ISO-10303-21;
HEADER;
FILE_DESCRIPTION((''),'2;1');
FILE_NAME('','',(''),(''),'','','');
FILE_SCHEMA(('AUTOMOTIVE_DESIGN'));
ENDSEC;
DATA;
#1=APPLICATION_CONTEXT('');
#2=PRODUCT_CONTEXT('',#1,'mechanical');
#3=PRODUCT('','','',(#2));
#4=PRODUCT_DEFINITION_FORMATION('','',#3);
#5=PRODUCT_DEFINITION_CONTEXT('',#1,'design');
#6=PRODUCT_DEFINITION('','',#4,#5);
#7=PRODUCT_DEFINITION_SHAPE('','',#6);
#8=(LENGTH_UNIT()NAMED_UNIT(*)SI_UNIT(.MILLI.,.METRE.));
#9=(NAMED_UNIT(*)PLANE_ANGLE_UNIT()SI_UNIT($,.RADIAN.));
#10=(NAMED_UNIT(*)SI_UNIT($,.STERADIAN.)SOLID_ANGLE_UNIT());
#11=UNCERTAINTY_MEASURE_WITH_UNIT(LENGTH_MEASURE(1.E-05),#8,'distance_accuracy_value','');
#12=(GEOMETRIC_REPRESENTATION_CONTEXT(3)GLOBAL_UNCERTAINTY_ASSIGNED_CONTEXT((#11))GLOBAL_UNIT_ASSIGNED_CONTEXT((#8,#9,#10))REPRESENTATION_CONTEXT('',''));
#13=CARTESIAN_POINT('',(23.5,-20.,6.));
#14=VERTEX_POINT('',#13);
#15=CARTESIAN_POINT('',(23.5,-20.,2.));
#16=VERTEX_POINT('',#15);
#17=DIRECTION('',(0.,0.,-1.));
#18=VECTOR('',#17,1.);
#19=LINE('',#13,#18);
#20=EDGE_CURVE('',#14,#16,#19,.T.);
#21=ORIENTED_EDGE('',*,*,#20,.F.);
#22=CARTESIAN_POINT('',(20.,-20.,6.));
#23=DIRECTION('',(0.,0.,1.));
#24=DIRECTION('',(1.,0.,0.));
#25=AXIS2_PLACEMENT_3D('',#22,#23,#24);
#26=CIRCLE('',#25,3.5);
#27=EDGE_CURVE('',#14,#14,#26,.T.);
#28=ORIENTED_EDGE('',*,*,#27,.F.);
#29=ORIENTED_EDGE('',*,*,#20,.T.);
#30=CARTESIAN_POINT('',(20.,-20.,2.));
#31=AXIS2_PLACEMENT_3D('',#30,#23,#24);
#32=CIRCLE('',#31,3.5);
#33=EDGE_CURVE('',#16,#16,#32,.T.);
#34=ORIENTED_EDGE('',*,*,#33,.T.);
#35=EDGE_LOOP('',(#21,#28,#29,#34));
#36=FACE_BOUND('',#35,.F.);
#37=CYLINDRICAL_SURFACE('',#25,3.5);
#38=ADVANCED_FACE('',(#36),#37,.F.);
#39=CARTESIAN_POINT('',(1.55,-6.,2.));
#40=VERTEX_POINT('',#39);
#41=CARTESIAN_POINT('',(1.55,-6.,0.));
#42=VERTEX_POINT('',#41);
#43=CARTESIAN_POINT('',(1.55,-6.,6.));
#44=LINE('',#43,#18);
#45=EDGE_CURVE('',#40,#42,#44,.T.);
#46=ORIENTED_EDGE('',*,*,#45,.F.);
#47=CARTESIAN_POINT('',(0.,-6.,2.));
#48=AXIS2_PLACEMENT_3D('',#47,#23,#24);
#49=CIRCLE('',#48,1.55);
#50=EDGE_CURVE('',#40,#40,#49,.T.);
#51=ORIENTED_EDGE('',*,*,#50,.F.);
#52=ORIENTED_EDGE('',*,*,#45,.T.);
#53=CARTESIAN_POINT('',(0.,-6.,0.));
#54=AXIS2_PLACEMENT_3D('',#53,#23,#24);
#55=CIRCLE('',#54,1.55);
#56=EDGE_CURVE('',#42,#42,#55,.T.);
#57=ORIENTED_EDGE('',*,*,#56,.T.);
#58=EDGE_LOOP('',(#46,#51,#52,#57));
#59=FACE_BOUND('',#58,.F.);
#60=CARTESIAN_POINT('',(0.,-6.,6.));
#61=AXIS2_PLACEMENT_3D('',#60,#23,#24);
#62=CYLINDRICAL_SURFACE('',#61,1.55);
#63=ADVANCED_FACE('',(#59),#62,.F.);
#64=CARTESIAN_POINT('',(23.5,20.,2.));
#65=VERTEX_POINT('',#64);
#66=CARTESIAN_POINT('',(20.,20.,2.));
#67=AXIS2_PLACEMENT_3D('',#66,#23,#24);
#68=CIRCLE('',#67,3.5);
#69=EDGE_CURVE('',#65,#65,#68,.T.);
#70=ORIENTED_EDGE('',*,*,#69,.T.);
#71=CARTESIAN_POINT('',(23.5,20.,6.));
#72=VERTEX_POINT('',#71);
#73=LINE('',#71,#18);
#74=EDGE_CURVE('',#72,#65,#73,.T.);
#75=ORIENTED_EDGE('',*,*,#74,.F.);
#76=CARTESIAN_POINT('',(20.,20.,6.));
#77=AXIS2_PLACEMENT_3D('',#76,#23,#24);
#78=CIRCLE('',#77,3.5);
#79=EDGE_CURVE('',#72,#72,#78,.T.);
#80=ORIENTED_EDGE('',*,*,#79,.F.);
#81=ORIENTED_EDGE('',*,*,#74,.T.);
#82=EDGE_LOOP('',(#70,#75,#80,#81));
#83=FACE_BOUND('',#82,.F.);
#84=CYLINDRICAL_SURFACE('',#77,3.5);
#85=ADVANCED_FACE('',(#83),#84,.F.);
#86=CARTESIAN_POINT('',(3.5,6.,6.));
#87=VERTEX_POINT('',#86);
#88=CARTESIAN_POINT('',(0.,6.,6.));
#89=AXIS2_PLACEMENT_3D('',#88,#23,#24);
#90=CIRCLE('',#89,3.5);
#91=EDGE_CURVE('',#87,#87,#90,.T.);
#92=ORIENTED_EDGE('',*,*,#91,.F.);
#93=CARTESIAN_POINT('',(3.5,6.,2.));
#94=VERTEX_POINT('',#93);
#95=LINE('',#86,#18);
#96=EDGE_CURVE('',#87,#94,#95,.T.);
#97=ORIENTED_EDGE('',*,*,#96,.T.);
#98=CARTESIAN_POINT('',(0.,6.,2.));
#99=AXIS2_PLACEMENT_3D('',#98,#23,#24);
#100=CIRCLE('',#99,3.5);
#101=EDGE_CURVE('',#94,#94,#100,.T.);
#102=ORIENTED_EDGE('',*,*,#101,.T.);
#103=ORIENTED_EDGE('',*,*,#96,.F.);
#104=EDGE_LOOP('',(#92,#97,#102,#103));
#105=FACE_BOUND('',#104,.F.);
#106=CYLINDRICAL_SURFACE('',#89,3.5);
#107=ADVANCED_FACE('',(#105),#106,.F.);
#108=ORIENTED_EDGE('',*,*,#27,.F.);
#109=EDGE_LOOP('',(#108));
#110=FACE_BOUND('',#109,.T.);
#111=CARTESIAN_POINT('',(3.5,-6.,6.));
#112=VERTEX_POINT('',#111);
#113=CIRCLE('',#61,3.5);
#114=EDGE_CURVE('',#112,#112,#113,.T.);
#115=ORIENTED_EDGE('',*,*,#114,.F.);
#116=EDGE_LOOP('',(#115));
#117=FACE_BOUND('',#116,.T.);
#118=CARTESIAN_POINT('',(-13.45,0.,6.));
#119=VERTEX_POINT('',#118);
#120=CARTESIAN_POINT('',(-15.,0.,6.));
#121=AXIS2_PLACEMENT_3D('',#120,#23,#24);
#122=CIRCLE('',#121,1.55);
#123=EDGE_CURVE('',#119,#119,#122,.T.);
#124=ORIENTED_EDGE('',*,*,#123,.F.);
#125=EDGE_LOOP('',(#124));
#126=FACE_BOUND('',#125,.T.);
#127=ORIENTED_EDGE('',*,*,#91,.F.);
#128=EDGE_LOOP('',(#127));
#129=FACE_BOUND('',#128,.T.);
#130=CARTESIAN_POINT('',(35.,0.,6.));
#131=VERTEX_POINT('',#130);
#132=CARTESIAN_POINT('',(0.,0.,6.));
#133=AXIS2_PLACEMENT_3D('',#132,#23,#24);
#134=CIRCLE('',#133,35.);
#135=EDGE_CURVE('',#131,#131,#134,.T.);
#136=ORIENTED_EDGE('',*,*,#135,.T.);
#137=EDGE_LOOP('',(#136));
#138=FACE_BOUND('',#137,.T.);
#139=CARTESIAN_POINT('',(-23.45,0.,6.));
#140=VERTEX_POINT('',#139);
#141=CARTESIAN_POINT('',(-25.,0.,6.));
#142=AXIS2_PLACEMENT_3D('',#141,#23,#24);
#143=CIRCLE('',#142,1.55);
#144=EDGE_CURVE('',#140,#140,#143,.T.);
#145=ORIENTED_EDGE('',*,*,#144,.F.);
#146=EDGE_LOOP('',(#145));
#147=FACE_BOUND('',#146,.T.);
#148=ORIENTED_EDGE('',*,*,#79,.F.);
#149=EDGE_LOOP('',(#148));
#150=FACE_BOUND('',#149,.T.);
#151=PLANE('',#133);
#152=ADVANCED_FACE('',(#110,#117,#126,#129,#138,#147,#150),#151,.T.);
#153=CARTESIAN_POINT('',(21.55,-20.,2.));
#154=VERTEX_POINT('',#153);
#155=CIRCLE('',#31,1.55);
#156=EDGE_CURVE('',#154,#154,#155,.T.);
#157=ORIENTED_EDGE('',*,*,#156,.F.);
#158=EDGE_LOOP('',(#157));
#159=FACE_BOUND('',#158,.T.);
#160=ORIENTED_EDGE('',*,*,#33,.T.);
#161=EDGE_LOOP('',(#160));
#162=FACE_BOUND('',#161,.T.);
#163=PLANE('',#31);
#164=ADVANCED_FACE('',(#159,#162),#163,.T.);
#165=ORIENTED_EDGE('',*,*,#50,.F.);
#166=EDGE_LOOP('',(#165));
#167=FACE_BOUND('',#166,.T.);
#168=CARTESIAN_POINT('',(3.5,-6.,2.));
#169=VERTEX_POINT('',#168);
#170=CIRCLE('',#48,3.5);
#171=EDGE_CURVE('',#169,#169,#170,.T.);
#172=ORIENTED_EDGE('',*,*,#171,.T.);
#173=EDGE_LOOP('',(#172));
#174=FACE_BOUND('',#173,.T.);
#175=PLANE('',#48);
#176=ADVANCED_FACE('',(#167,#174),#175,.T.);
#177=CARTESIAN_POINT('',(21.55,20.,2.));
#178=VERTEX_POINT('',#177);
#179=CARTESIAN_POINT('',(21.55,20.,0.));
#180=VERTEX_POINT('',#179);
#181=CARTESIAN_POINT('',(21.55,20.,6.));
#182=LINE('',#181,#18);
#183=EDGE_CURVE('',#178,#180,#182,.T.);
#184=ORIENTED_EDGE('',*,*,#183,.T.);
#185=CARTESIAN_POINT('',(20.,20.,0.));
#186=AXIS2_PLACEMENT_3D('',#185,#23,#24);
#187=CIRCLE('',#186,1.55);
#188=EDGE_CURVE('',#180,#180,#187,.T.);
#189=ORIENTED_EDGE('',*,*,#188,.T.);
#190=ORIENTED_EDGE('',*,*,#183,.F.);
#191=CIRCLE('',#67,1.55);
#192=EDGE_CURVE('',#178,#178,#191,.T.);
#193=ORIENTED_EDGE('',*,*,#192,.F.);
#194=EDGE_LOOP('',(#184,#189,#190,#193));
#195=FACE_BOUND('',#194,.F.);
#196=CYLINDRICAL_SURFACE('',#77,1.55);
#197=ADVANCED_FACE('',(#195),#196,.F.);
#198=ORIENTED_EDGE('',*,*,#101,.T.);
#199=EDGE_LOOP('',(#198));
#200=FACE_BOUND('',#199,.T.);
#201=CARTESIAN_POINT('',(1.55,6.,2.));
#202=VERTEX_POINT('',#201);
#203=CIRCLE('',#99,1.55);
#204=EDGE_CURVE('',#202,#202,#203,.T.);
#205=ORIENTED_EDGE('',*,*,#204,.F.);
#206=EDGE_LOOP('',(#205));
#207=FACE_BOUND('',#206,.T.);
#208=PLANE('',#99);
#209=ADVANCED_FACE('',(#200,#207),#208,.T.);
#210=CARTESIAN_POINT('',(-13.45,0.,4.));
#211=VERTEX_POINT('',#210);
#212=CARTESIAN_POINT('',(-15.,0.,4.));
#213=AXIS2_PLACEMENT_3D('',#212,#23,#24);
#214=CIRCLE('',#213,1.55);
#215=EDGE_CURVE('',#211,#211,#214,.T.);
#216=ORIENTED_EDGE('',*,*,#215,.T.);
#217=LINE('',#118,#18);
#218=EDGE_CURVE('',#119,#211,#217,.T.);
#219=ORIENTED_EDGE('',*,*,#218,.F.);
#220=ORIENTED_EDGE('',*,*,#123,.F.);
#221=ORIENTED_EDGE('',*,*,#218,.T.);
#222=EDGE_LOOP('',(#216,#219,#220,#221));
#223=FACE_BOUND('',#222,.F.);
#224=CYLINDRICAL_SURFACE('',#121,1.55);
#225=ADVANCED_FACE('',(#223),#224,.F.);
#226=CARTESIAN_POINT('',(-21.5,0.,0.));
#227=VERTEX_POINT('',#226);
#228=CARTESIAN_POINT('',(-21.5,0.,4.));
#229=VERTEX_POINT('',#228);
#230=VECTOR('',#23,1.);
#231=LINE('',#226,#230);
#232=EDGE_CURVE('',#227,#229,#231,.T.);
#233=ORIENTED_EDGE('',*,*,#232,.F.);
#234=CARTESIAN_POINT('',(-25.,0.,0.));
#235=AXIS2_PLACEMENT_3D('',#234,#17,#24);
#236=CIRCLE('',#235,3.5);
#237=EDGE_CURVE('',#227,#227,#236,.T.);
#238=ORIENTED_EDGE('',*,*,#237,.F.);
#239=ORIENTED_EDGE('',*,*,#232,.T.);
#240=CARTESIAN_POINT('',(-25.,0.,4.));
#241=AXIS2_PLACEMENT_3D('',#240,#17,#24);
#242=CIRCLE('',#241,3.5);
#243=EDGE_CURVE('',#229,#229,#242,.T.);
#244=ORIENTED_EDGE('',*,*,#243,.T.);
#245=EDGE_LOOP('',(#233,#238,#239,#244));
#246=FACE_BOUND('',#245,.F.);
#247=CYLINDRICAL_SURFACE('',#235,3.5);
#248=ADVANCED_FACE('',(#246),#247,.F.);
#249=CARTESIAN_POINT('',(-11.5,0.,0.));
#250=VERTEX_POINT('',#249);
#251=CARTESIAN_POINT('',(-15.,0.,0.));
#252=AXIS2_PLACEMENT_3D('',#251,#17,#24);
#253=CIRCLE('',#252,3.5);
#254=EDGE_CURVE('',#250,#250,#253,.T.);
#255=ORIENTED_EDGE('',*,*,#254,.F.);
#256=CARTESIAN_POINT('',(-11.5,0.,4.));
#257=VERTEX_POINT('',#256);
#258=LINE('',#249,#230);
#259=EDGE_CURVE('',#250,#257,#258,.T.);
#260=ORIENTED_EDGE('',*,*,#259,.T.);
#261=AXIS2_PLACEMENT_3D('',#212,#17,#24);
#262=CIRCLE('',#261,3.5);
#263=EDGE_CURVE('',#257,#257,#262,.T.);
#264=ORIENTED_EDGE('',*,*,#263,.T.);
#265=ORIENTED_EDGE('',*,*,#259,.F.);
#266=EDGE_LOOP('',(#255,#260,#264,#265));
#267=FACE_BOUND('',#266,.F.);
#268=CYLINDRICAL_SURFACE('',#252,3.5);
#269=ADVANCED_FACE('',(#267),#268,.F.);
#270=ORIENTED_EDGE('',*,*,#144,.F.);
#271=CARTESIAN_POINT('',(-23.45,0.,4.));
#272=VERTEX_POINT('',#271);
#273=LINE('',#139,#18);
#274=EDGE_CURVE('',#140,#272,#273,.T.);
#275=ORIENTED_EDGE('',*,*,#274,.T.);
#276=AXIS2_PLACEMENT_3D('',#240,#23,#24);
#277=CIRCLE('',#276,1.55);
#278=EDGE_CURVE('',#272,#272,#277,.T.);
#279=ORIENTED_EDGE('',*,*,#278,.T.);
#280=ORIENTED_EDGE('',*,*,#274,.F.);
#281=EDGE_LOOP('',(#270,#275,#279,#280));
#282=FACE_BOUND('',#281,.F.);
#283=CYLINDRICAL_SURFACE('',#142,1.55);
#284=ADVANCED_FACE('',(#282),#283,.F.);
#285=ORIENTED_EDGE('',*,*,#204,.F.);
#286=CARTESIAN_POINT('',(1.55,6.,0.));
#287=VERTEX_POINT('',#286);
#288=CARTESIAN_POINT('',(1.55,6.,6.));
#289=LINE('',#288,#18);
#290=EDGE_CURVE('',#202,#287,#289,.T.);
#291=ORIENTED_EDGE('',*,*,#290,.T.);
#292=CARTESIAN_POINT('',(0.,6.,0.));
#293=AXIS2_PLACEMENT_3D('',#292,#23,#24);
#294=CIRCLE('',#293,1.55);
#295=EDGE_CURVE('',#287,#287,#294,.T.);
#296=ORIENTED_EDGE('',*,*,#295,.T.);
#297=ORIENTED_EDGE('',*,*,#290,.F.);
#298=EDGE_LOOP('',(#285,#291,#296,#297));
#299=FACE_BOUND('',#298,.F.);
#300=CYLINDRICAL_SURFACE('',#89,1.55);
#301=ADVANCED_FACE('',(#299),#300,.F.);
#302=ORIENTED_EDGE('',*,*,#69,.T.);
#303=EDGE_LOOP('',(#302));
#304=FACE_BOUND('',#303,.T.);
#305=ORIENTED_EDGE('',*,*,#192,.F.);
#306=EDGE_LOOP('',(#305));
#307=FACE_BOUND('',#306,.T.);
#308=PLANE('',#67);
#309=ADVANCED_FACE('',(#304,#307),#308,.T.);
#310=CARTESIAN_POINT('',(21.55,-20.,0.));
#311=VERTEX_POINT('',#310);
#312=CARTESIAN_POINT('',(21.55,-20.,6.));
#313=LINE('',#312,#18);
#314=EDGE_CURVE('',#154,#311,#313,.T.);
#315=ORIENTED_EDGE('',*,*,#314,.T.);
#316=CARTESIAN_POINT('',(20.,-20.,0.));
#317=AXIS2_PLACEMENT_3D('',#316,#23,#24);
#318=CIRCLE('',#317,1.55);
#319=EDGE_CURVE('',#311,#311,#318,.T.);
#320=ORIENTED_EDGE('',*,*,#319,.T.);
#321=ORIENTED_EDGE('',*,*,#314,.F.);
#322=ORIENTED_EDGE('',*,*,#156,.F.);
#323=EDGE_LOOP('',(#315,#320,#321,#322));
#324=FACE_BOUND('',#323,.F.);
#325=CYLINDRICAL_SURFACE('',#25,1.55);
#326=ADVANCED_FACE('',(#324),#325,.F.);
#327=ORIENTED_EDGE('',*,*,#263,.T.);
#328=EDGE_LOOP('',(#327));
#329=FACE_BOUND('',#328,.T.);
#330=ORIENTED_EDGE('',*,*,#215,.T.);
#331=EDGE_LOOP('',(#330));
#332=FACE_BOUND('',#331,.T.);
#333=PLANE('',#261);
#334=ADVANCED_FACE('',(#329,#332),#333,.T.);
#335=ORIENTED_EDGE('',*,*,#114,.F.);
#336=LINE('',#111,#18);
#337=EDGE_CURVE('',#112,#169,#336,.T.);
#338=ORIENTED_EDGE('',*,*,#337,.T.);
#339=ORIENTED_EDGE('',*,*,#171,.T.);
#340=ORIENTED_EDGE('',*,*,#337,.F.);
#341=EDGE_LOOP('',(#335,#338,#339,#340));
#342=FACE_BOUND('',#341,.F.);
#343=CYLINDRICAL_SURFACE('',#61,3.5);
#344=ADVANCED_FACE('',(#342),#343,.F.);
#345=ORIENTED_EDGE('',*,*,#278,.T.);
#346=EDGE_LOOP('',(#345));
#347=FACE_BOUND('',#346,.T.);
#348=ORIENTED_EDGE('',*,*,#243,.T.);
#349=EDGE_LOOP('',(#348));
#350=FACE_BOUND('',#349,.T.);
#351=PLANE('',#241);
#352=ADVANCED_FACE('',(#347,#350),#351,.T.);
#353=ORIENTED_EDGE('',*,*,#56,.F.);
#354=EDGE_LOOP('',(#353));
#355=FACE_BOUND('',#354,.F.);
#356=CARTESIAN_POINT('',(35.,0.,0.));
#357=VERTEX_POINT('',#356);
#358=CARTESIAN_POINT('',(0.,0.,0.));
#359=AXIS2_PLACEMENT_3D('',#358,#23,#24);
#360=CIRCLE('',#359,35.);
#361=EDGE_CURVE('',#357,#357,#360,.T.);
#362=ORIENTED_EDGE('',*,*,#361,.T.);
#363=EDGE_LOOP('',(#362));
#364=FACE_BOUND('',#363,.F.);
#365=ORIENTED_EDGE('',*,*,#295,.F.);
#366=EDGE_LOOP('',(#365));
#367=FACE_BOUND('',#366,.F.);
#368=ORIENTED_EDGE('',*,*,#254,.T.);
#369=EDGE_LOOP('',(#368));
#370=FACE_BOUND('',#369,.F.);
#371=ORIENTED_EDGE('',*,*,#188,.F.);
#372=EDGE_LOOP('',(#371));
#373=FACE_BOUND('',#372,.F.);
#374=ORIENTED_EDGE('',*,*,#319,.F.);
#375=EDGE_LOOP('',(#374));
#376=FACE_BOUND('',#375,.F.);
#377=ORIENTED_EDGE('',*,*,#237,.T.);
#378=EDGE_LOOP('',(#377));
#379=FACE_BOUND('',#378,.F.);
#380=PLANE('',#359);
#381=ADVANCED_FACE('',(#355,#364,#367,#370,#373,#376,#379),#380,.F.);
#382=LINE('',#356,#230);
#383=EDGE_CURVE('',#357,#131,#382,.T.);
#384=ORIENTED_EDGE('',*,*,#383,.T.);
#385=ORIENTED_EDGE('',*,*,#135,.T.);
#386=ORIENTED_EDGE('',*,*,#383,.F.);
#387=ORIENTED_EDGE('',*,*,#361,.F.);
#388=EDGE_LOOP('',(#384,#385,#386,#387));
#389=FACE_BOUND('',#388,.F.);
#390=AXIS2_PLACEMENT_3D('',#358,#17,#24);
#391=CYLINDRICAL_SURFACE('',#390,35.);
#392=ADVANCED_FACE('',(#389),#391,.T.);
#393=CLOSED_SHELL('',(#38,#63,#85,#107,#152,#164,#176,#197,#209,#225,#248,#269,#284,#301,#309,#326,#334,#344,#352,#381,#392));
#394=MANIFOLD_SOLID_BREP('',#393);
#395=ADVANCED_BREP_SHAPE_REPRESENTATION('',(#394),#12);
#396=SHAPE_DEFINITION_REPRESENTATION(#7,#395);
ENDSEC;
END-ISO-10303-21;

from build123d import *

# Parameters (mm, degrees)
F0_R     = 35
F1_DEPTH = 6
F2_R     = 1.55
F3_DEPTH = 6
F4_R     = 3.5
F4_R_2   = 1.55
F5_DEPTH = 4
F6_R     = 3.5
F7_DEPTH = 4


# Not quite as in the source:
# - a feature names something its author has since deleted; it is built from what else it names


with BuildPart() as f1:
    # F0 (on Top) → F1 (new body)
    with BuildSketch(Plane.XY):
        Circle(F0_R)
    extrude(amount=F1_DEPTH)

    # F2 (on face) → F3 (cut, through all)
    with BuildSketch(Plane.XY.offset(6)):
        with Locations((0, 6)):
            Circle(F2_R)
        with Locations((0, -6)):
            Circle(F2_R)
        with Locations((20, 20)):
            Circle(F2_R)
        with Locations((20, -20)):
            Circle(F2_R)
        with Locations((-15, 0)):
            Circle(F2_R)
        with Locations((-25, 0)):
            Circle(F2_R)
    extrude(amount=-F3_DEPTH, mode=Mode.SUBTRACT)

    # F4 (on face) → F5 (cut)
    with BuildSketch(Plane.XY.offset(6)):
        with Locations((0, -6)):
            Circle(F4_R)
        with Locations((0, 6)):
            Circle(F4_R)
        with Locations((20, -20)):
            Circle(F4_R)
        with Locations((20, 20)):
            Circle(F4_R)
        with Locations((20, 20)):
            Circle(F4_R_2)
        with Locations((20, -20)):
            Circle(F4_R_2)
    extrude(amount=-F5_DEPTH, mode=Mode.SUBTRACT)

    # F6 (on face) → F7 (cut)
    with BuildSketch(Plane(origin=(0, 0, 0), x_dir=(1, 0, 0), z_dir=(0, 0, -1))):
        with Locations((-25, 0)):
            Circle(F6_R)
        with Locations((-15, 0)):
            Circle(F6_R)
    extrude(amount=-F7_DEPTH, mode=Mode.SUBTRACT)


solid = f1.part
